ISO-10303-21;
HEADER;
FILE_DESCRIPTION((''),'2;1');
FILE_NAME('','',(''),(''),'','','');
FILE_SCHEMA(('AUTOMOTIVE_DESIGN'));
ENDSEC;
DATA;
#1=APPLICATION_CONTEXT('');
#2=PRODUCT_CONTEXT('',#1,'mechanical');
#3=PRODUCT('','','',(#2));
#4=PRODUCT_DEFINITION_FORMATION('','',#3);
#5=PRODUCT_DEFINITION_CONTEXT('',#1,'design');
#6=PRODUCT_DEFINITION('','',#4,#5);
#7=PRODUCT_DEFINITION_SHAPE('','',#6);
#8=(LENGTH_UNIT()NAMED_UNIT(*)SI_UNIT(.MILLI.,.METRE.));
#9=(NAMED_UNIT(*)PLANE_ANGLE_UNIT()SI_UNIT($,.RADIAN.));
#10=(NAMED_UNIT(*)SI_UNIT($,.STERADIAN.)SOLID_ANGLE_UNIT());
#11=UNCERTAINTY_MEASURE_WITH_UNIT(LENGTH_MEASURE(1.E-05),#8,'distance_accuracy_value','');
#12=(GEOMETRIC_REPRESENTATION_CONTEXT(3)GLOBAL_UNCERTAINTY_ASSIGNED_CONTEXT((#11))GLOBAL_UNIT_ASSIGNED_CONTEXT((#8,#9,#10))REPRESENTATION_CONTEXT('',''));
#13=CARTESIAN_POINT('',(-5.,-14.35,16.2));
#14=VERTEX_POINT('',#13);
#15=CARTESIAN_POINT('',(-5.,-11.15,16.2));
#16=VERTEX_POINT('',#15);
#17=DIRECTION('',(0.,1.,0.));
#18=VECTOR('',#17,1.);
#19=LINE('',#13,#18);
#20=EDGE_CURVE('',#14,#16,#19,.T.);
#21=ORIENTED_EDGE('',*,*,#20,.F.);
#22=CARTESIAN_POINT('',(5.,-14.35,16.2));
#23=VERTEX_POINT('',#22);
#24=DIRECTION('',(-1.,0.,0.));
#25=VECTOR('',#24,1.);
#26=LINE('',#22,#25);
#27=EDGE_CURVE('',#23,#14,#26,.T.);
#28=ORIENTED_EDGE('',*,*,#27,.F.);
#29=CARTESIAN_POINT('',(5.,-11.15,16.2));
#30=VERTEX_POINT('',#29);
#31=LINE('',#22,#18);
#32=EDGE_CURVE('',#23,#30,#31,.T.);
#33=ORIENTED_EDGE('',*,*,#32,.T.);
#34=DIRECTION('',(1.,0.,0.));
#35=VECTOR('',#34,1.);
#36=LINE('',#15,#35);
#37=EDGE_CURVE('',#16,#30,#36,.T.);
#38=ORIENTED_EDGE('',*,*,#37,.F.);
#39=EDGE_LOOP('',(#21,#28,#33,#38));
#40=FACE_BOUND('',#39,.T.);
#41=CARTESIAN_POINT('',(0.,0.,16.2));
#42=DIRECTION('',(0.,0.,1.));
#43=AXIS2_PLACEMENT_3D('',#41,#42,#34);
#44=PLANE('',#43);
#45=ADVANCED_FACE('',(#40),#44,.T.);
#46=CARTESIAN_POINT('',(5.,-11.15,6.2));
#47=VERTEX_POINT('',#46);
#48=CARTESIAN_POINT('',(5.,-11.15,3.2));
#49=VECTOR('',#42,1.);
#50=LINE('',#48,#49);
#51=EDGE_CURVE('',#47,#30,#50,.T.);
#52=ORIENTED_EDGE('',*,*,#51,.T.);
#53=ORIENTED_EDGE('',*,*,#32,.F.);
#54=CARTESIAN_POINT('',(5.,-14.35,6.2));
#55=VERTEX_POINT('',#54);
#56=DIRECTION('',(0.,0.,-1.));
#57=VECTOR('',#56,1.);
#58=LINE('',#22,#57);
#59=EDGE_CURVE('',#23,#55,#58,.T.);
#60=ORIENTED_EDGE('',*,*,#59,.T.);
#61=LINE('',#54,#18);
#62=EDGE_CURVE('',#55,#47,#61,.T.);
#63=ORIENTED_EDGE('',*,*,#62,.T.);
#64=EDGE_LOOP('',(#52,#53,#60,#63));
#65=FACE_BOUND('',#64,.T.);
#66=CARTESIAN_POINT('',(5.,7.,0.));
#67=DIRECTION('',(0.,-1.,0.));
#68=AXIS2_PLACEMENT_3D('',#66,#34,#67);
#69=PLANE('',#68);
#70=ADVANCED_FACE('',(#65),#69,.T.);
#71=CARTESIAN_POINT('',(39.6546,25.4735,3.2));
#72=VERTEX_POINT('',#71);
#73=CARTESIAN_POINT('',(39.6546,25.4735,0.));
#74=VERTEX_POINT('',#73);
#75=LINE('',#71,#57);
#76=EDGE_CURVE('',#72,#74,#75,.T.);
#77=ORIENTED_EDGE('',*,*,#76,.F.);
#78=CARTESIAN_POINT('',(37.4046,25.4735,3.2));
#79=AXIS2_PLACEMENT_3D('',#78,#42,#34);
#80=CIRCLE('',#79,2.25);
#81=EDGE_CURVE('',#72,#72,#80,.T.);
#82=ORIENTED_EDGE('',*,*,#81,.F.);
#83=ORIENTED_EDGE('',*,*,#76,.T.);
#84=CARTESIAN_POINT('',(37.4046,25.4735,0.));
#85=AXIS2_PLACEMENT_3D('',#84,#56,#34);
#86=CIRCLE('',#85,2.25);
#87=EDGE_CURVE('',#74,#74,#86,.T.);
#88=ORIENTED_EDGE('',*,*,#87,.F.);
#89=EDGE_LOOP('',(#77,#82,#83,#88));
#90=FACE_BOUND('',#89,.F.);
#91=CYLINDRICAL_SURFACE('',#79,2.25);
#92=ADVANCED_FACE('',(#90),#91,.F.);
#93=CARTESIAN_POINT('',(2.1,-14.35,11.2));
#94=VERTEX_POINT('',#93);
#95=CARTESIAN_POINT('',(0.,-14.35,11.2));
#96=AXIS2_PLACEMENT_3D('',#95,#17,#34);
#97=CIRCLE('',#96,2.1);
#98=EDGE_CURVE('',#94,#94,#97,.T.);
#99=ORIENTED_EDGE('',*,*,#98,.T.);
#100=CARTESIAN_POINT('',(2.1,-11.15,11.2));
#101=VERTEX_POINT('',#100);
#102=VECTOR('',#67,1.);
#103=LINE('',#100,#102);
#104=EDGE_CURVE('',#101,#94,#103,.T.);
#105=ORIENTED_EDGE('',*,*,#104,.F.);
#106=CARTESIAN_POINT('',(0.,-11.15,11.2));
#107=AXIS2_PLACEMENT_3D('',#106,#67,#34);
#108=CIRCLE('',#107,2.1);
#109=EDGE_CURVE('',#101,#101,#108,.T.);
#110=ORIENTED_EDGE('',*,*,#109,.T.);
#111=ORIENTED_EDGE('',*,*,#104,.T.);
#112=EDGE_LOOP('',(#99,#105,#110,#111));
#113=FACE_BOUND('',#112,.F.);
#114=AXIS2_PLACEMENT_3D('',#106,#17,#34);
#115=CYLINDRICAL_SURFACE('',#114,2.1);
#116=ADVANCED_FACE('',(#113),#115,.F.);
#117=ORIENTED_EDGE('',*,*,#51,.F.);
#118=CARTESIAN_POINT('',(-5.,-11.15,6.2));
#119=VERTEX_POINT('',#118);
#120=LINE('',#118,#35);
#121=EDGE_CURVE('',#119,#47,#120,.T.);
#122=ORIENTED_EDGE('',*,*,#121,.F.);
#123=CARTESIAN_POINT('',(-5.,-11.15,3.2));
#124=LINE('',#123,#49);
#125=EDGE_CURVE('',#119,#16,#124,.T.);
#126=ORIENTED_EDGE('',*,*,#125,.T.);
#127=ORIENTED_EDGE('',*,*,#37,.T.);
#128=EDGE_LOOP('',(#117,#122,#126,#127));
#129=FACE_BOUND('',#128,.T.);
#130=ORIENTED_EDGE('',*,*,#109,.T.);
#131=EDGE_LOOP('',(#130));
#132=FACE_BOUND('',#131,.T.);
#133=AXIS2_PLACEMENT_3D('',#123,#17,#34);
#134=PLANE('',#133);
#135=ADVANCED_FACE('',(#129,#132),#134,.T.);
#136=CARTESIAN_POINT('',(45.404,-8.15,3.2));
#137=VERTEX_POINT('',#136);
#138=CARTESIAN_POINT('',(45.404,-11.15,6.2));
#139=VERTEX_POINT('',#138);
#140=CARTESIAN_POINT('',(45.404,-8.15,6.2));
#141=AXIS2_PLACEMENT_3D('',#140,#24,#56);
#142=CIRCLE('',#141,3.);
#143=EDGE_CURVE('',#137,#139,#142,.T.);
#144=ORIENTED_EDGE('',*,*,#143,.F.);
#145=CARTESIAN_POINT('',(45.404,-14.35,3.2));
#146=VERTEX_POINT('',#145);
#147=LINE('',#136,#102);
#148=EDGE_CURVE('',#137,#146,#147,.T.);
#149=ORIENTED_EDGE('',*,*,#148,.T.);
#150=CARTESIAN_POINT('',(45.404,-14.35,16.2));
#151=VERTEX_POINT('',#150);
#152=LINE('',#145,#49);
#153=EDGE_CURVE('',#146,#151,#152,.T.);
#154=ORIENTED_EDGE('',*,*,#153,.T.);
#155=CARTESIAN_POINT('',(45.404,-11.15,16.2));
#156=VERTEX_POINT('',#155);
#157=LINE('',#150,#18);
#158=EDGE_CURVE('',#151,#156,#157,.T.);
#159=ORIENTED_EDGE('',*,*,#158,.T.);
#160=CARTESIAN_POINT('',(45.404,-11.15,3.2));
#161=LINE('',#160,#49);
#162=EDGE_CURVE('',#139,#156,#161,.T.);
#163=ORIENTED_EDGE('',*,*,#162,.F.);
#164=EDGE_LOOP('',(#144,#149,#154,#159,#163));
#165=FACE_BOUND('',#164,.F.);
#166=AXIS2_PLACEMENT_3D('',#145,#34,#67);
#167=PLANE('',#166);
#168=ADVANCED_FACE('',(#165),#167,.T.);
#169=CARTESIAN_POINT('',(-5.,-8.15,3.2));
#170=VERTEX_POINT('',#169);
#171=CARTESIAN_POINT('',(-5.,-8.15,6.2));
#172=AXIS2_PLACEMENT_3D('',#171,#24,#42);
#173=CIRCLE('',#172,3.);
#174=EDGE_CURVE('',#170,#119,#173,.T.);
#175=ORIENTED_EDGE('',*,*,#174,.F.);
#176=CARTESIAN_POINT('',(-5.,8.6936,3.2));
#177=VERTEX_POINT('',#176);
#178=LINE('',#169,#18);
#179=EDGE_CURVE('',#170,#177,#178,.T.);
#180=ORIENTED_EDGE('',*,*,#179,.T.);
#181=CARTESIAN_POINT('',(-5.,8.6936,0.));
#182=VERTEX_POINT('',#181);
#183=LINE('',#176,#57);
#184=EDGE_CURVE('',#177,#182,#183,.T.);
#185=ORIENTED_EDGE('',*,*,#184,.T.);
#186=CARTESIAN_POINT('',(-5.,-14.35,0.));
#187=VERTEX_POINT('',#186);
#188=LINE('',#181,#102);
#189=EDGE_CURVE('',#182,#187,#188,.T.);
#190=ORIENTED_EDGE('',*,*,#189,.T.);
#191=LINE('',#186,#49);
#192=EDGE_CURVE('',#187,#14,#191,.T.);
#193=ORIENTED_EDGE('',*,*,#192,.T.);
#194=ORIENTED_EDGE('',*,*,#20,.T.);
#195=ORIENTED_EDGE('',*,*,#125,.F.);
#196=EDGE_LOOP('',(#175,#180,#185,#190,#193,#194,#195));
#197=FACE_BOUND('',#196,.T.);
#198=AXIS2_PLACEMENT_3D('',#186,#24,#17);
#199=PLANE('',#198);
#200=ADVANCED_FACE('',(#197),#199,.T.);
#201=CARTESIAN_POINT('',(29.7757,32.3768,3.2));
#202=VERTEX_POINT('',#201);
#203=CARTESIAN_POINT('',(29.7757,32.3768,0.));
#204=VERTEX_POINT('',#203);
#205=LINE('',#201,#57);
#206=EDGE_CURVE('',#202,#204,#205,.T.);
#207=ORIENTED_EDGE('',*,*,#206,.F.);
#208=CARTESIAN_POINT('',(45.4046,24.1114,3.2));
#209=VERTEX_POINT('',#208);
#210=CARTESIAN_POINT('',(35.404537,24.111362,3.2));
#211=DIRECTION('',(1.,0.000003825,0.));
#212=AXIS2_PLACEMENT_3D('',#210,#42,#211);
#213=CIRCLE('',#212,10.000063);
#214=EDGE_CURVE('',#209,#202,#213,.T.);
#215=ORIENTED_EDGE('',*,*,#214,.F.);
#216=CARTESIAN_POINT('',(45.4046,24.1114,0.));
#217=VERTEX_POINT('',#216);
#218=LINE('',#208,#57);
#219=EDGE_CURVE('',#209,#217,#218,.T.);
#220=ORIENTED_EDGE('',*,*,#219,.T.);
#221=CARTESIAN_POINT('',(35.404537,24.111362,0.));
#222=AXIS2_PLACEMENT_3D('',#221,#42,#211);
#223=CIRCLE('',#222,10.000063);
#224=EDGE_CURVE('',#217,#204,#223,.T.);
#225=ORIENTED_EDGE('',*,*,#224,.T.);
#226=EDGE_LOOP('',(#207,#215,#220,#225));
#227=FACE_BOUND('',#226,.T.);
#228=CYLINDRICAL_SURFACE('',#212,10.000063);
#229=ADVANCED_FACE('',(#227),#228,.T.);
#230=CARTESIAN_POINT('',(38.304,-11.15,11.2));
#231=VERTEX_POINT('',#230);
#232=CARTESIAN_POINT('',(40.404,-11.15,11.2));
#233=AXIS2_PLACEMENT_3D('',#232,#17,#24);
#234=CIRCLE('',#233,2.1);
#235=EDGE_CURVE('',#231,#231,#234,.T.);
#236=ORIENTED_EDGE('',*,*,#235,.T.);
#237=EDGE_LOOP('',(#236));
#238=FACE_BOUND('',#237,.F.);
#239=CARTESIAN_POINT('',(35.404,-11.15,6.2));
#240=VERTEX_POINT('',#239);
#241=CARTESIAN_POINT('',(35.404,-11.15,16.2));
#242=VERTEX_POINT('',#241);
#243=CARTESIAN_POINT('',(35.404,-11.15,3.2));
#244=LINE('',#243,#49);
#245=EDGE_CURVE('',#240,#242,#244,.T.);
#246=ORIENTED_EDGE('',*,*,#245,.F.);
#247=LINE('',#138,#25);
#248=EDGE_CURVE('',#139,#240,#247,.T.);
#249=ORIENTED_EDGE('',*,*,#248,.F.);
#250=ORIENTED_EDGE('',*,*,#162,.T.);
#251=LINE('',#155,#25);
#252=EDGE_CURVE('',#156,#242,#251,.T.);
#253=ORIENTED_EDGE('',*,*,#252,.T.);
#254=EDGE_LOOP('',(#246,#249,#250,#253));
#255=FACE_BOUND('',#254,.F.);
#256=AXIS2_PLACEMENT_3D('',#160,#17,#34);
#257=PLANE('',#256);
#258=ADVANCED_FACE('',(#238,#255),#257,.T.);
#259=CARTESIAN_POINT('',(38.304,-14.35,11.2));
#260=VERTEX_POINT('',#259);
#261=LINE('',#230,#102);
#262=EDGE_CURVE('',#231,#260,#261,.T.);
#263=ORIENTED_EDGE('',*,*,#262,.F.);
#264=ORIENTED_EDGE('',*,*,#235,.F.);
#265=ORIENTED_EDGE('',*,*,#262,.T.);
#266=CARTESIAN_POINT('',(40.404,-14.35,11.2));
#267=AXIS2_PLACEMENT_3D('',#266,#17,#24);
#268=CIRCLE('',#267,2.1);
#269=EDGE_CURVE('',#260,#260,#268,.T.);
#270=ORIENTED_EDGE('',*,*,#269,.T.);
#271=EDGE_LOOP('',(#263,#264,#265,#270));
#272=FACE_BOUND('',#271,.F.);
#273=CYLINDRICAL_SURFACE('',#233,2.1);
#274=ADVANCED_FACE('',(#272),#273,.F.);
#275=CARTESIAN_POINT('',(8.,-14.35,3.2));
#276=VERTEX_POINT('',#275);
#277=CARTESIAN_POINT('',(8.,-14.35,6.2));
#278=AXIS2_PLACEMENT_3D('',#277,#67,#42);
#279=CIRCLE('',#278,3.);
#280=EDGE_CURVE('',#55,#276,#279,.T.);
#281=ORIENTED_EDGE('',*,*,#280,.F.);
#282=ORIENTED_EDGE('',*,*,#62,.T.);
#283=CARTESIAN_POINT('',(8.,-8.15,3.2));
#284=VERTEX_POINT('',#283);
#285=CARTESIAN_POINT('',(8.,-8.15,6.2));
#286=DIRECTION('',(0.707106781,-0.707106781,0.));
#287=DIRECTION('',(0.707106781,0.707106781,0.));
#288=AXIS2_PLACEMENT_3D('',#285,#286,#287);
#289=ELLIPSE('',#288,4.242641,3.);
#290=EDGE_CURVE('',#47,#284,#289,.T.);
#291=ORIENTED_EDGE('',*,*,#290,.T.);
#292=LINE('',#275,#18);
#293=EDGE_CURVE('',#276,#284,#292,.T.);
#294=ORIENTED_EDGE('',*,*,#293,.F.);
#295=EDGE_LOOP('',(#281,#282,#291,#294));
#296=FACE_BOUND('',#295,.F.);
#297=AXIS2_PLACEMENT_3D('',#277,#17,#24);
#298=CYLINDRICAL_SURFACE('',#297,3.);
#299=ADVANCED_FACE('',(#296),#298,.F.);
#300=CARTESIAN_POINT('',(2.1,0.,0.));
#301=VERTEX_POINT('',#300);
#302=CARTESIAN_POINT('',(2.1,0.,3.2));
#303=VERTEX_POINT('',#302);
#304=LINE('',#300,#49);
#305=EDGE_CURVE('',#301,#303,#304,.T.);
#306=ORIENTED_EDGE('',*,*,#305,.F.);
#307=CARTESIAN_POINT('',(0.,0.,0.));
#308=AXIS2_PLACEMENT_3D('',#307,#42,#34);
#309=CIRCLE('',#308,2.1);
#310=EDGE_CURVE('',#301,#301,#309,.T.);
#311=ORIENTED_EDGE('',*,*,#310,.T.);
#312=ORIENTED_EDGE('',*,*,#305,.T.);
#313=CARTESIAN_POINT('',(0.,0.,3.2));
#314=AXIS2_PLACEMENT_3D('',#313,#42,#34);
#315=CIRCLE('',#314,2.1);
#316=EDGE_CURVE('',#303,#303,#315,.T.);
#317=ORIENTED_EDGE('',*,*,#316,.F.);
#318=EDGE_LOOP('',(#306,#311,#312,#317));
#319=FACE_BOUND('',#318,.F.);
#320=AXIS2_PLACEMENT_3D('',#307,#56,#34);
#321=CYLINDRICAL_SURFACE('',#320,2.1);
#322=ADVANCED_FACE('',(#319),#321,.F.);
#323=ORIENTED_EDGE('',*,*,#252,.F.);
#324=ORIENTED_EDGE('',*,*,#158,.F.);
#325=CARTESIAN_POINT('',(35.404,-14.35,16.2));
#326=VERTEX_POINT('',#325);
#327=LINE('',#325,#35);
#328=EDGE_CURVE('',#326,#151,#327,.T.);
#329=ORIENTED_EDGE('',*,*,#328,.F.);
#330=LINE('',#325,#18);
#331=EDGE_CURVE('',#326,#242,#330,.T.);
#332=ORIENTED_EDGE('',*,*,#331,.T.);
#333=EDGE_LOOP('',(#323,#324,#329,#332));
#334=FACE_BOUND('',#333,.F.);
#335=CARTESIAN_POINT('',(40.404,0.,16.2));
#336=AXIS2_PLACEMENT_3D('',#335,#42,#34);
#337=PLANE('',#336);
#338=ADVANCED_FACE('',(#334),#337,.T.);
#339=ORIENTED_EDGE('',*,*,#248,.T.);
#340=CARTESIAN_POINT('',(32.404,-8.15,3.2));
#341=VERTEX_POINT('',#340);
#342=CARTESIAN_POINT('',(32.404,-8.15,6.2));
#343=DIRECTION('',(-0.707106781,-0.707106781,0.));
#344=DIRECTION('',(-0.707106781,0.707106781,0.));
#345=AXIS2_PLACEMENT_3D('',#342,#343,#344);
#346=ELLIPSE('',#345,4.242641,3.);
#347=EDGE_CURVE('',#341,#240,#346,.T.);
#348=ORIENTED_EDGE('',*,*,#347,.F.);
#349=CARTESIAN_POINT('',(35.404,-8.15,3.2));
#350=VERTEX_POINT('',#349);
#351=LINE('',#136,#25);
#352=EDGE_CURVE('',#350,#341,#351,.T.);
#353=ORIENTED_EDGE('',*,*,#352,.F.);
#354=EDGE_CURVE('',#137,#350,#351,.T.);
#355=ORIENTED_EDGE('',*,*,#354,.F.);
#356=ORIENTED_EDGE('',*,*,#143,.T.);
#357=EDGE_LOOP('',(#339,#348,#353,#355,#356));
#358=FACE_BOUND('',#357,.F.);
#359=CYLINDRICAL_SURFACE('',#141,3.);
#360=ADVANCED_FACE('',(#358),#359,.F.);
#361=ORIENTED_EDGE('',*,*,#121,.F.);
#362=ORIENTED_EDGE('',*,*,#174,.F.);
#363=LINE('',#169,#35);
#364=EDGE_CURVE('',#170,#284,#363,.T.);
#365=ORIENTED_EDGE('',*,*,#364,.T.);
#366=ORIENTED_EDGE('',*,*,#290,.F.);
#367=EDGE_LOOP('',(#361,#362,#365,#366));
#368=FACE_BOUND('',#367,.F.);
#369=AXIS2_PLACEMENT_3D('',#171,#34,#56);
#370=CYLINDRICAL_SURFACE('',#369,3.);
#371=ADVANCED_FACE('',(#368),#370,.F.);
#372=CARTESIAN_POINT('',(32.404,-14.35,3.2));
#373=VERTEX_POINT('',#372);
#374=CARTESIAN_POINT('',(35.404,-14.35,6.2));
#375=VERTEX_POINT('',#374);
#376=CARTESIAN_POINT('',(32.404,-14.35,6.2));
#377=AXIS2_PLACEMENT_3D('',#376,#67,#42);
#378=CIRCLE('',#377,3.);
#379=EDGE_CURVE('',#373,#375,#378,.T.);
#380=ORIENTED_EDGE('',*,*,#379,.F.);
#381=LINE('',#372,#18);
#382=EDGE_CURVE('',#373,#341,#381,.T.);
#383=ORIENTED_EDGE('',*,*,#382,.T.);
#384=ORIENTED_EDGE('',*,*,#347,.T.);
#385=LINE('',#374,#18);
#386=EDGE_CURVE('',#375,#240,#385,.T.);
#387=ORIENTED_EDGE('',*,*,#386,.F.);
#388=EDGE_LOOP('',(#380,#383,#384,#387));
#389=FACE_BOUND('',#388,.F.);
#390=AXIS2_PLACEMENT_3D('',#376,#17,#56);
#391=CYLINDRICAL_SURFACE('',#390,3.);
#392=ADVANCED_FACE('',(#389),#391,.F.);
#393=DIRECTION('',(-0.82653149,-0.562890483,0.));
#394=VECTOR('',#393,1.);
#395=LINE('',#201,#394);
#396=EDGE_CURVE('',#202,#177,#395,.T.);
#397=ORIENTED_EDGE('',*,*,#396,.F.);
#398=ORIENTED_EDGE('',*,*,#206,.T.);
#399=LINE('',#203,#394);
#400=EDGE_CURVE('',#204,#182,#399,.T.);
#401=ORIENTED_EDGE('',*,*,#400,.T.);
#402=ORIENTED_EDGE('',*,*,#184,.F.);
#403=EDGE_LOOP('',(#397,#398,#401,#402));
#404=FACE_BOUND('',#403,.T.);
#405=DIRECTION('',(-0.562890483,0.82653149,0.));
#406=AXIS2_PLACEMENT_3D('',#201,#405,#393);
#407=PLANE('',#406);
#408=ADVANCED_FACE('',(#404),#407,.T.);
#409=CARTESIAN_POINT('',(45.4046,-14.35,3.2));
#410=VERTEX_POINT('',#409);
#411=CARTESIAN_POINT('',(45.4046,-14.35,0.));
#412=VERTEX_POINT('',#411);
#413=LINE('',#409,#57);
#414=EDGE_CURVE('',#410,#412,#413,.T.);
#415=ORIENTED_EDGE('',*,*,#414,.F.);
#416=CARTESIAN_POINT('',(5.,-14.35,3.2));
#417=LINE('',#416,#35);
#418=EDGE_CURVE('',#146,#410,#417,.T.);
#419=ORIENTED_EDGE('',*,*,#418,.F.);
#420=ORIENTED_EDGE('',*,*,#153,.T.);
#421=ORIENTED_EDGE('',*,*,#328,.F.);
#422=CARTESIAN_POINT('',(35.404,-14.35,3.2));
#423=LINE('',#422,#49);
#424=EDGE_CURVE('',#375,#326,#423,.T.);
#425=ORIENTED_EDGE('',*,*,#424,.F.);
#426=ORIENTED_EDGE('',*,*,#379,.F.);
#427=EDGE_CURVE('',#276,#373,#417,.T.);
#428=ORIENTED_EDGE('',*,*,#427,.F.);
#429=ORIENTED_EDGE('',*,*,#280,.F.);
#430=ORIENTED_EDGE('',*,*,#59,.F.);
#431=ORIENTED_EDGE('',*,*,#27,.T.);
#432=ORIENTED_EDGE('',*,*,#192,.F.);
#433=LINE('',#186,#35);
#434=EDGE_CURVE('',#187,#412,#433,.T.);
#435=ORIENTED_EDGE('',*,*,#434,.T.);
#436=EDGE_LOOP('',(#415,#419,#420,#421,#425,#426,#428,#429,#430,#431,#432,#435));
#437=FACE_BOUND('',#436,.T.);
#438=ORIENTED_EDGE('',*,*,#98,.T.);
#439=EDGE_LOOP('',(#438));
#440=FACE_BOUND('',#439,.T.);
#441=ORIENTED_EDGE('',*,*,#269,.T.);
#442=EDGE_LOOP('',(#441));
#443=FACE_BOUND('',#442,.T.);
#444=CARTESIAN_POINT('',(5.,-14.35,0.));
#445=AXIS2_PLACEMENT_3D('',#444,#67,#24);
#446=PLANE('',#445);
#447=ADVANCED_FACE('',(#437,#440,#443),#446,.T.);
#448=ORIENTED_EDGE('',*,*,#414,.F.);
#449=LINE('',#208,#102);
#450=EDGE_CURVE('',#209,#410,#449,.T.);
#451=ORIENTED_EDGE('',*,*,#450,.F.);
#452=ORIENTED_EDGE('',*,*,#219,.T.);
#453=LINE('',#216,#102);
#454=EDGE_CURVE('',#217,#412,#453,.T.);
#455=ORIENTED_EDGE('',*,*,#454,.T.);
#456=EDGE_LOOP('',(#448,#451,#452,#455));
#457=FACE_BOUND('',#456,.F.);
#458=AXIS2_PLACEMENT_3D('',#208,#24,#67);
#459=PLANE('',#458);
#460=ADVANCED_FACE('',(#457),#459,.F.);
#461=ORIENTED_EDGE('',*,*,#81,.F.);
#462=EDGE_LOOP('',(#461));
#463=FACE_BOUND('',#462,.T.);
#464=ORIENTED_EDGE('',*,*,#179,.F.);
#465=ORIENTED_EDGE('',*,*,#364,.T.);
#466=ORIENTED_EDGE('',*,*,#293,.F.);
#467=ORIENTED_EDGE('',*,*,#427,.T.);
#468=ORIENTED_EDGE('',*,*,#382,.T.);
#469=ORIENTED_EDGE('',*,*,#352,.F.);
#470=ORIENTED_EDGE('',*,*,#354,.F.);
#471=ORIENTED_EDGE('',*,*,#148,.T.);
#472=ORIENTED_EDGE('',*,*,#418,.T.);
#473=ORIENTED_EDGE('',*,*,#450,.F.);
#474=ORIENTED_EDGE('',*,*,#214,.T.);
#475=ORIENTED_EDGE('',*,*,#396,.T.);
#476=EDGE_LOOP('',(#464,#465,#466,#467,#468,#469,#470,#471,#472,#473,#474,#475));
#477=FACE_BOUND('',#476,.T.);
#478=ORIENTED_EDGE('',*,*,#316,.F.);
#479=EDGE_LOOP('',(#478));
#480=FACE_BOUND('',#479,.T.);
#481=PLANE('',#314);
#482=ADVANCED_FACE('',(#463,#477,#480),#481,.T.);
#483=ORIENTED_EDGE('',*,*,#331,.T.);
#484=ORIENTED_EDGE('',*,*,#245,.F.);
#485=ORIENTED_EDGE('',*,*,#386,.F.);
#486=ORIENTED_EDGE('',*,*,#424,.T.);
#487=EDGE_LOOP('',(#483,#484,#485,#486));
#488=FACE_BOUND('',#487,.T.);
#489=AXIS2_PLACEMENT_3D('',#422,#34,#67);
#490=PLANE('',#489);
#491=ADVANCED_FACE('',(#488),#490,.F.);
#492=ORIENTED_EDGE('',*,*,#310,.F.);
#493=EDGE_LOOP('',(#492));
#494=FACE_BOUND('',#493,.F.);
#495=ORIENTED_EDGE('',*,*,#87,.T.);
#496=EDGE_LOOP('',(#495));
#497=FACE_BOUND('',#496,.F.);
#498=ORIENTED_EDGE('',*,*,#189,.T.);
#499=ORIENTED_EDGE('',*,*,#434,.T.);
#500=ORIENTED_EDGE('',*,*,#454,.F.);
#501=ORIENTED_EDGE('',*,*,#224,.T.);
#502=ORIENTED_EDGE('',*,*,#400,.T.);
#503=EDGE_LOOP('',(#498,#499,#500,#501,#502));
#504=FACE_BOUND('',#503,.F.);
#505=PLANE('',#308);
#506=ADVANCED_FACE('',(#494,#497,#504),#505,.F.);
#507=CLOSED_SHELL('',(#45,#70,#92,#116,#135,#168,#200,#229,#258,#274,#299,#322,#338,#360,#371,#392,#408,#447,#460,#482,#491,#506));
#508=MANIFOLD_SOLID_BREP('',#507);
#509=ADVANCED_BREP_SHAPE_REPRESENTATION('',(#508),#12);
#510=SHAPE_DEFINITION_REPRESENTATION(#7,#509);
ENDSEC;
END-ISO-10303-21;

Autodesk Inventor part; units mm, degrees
ref_plane "YZ Plane" through (0, 0, 0) normal (1, 0, 0) x (0, 1, 0)
ref_plane "XZ Plane" through (0, 0, 0) normal (0, 1, 0) x (-1, 0, 0)
ref_plane "XY Plane" through (0, 0, 0) normal (0, 0, 1) x (1, 0, 0)
sketch "Эскиз1" plane through (0, 0, 0) normal (0, 0, 1) x (1, 0, 0)
  circle A0 centre (0, 0) radius 2.1
  line L0 (-5, 14.35) -> (5, 14.35)
  line L1 (5, 14.35) -> (5, -14.35)
  line L2 (5, -14.35) -> (-5, -14.35)
  line L3 (-5, -14.35) -> (-5, 14.35)
  line L4 (-5, 14.35) -> (5, -14.35) construction
  line L5 (5, 14.35) -> (-5, -14.35) construction
  line L6 (-5, 7) -> (5, 7)
  dimension "d0" = 4.2
  dimension "d2" = 10
  dimension "d3" = 28.7
  dimension "d4" = 7
extrude "Выдавливание1" add sketch "Эскиз1" along normal blind 3.2 contours L6 L1 L2 L3
sketch "Эскиз2" plane through (0, 0, 3.2) normal (0, 0, 1) x (1, 0, 0)
  line L0 (5, -14.35) -> (5, 7) projected
  line L1 (5, -14.35) -> (-5, -14.35)
  line L2 (-5, -14.35) -> (-5, -11.15)
  line L3 (-5, -11.15) -> (5, -11.15)
  line L4 (5, -11.15) -> (5, -14.35)
  point P0 (0, 0)
  point P1 (5, -11.15)
  dimension "d7" = 10
  dimension "d8" = 3.2
extrude "Выдавливание2" add sketch "Эскиз2" along normal blind 13
fillet "Сопряжение1" radius 3 1 edges at (0, -11.15, 3.2)
sketch "Эскиз3" plane through (-5, -11.15, 16.2) normal (0, 1, 0) x (1, 0, 0)
  line L0 (0, 10) -> (10, 10) projected
  line L1 (5, 10) -> (5, 0)
  line L2 (0, 0) -> (10, 0) projected
  circle A0 centre (5, 5) radius 2.1
  point P0 (5, 16.2)
  dimension "d12" = 4.2
extrude "Выдавливание3" cut sketch "Эскиз3" against normal blind 13
sketch "Эскиз4" plane through (0, 0, 3.2) normal (0, 0, 1) x (1, 0, 0)
  circle A0 centre (37.4046, 25.4735) radius 2.6917 projected
  line L0 (35.1798, 23.9584) -> (0, 0)
  line L1 (29.7757, 32.3768) -> (-5, 8.6936)
  line L2 (-5, 7) -> (-5, -8.15) projected
  line L3 (-5, 7) -> (-5, 8.6936)
  line L4 (-5, -14.35) -> (5, -14.35) projected
  line L5 (5, -14.35) -> (5, -11.15) projected
  line L6 (5, -11.15) -> (-5, -11.15) projected
  line L7 (-5, -11.15) -> (-5, -14.35) projected
  line L8 (37.4046, 25.4735) -> (37.4046, -14.35)
  line L9 (45.4046, 24.1114) -> (45.4046, -14.35)
  arc A1 (45.4046, 24.1114) -> (29.7757, 32.3768) centre (35.4046, 24.1114) ccw
  line L10 (-5, -14.35) -> (45.4046, -14.35)
  circle A2 centre (37.4046, 25.4735) radius 2.25
  line L11 (-5, 8.6936) -> (-5, -14.35)
  circle A3 centre (0, 0) radius 2.1 projected
  dimension "d15" = 10
  dimension "d16" = 8
  dimension "d17" = 10
  dimension "d18" = 4.5
extrude "Выдавливание4" add sketch "Эскиз4" against normal up to surface (3.2 mm away) contours A0 | A1 L9 L10 L5 L6 L11 L2 L3 L1
fillet "Сопряжение2" radius 3 1 edges at (5, -11.25, 3.2)
ref_plane "РабПлоскость1" through (20.202, -14.35, 16.2) normal (-1, 0, 0) x (0, 0, 1)
mirror "Зеркальное отражение1" about plane through (20.202, -14.35, 16.2) normal (-1, 0, 0) of "Выдавливание2", "Выдавливание3", "Сопряжение1", "Сопряжение2"
properties part number "мертвое колесо 3"
